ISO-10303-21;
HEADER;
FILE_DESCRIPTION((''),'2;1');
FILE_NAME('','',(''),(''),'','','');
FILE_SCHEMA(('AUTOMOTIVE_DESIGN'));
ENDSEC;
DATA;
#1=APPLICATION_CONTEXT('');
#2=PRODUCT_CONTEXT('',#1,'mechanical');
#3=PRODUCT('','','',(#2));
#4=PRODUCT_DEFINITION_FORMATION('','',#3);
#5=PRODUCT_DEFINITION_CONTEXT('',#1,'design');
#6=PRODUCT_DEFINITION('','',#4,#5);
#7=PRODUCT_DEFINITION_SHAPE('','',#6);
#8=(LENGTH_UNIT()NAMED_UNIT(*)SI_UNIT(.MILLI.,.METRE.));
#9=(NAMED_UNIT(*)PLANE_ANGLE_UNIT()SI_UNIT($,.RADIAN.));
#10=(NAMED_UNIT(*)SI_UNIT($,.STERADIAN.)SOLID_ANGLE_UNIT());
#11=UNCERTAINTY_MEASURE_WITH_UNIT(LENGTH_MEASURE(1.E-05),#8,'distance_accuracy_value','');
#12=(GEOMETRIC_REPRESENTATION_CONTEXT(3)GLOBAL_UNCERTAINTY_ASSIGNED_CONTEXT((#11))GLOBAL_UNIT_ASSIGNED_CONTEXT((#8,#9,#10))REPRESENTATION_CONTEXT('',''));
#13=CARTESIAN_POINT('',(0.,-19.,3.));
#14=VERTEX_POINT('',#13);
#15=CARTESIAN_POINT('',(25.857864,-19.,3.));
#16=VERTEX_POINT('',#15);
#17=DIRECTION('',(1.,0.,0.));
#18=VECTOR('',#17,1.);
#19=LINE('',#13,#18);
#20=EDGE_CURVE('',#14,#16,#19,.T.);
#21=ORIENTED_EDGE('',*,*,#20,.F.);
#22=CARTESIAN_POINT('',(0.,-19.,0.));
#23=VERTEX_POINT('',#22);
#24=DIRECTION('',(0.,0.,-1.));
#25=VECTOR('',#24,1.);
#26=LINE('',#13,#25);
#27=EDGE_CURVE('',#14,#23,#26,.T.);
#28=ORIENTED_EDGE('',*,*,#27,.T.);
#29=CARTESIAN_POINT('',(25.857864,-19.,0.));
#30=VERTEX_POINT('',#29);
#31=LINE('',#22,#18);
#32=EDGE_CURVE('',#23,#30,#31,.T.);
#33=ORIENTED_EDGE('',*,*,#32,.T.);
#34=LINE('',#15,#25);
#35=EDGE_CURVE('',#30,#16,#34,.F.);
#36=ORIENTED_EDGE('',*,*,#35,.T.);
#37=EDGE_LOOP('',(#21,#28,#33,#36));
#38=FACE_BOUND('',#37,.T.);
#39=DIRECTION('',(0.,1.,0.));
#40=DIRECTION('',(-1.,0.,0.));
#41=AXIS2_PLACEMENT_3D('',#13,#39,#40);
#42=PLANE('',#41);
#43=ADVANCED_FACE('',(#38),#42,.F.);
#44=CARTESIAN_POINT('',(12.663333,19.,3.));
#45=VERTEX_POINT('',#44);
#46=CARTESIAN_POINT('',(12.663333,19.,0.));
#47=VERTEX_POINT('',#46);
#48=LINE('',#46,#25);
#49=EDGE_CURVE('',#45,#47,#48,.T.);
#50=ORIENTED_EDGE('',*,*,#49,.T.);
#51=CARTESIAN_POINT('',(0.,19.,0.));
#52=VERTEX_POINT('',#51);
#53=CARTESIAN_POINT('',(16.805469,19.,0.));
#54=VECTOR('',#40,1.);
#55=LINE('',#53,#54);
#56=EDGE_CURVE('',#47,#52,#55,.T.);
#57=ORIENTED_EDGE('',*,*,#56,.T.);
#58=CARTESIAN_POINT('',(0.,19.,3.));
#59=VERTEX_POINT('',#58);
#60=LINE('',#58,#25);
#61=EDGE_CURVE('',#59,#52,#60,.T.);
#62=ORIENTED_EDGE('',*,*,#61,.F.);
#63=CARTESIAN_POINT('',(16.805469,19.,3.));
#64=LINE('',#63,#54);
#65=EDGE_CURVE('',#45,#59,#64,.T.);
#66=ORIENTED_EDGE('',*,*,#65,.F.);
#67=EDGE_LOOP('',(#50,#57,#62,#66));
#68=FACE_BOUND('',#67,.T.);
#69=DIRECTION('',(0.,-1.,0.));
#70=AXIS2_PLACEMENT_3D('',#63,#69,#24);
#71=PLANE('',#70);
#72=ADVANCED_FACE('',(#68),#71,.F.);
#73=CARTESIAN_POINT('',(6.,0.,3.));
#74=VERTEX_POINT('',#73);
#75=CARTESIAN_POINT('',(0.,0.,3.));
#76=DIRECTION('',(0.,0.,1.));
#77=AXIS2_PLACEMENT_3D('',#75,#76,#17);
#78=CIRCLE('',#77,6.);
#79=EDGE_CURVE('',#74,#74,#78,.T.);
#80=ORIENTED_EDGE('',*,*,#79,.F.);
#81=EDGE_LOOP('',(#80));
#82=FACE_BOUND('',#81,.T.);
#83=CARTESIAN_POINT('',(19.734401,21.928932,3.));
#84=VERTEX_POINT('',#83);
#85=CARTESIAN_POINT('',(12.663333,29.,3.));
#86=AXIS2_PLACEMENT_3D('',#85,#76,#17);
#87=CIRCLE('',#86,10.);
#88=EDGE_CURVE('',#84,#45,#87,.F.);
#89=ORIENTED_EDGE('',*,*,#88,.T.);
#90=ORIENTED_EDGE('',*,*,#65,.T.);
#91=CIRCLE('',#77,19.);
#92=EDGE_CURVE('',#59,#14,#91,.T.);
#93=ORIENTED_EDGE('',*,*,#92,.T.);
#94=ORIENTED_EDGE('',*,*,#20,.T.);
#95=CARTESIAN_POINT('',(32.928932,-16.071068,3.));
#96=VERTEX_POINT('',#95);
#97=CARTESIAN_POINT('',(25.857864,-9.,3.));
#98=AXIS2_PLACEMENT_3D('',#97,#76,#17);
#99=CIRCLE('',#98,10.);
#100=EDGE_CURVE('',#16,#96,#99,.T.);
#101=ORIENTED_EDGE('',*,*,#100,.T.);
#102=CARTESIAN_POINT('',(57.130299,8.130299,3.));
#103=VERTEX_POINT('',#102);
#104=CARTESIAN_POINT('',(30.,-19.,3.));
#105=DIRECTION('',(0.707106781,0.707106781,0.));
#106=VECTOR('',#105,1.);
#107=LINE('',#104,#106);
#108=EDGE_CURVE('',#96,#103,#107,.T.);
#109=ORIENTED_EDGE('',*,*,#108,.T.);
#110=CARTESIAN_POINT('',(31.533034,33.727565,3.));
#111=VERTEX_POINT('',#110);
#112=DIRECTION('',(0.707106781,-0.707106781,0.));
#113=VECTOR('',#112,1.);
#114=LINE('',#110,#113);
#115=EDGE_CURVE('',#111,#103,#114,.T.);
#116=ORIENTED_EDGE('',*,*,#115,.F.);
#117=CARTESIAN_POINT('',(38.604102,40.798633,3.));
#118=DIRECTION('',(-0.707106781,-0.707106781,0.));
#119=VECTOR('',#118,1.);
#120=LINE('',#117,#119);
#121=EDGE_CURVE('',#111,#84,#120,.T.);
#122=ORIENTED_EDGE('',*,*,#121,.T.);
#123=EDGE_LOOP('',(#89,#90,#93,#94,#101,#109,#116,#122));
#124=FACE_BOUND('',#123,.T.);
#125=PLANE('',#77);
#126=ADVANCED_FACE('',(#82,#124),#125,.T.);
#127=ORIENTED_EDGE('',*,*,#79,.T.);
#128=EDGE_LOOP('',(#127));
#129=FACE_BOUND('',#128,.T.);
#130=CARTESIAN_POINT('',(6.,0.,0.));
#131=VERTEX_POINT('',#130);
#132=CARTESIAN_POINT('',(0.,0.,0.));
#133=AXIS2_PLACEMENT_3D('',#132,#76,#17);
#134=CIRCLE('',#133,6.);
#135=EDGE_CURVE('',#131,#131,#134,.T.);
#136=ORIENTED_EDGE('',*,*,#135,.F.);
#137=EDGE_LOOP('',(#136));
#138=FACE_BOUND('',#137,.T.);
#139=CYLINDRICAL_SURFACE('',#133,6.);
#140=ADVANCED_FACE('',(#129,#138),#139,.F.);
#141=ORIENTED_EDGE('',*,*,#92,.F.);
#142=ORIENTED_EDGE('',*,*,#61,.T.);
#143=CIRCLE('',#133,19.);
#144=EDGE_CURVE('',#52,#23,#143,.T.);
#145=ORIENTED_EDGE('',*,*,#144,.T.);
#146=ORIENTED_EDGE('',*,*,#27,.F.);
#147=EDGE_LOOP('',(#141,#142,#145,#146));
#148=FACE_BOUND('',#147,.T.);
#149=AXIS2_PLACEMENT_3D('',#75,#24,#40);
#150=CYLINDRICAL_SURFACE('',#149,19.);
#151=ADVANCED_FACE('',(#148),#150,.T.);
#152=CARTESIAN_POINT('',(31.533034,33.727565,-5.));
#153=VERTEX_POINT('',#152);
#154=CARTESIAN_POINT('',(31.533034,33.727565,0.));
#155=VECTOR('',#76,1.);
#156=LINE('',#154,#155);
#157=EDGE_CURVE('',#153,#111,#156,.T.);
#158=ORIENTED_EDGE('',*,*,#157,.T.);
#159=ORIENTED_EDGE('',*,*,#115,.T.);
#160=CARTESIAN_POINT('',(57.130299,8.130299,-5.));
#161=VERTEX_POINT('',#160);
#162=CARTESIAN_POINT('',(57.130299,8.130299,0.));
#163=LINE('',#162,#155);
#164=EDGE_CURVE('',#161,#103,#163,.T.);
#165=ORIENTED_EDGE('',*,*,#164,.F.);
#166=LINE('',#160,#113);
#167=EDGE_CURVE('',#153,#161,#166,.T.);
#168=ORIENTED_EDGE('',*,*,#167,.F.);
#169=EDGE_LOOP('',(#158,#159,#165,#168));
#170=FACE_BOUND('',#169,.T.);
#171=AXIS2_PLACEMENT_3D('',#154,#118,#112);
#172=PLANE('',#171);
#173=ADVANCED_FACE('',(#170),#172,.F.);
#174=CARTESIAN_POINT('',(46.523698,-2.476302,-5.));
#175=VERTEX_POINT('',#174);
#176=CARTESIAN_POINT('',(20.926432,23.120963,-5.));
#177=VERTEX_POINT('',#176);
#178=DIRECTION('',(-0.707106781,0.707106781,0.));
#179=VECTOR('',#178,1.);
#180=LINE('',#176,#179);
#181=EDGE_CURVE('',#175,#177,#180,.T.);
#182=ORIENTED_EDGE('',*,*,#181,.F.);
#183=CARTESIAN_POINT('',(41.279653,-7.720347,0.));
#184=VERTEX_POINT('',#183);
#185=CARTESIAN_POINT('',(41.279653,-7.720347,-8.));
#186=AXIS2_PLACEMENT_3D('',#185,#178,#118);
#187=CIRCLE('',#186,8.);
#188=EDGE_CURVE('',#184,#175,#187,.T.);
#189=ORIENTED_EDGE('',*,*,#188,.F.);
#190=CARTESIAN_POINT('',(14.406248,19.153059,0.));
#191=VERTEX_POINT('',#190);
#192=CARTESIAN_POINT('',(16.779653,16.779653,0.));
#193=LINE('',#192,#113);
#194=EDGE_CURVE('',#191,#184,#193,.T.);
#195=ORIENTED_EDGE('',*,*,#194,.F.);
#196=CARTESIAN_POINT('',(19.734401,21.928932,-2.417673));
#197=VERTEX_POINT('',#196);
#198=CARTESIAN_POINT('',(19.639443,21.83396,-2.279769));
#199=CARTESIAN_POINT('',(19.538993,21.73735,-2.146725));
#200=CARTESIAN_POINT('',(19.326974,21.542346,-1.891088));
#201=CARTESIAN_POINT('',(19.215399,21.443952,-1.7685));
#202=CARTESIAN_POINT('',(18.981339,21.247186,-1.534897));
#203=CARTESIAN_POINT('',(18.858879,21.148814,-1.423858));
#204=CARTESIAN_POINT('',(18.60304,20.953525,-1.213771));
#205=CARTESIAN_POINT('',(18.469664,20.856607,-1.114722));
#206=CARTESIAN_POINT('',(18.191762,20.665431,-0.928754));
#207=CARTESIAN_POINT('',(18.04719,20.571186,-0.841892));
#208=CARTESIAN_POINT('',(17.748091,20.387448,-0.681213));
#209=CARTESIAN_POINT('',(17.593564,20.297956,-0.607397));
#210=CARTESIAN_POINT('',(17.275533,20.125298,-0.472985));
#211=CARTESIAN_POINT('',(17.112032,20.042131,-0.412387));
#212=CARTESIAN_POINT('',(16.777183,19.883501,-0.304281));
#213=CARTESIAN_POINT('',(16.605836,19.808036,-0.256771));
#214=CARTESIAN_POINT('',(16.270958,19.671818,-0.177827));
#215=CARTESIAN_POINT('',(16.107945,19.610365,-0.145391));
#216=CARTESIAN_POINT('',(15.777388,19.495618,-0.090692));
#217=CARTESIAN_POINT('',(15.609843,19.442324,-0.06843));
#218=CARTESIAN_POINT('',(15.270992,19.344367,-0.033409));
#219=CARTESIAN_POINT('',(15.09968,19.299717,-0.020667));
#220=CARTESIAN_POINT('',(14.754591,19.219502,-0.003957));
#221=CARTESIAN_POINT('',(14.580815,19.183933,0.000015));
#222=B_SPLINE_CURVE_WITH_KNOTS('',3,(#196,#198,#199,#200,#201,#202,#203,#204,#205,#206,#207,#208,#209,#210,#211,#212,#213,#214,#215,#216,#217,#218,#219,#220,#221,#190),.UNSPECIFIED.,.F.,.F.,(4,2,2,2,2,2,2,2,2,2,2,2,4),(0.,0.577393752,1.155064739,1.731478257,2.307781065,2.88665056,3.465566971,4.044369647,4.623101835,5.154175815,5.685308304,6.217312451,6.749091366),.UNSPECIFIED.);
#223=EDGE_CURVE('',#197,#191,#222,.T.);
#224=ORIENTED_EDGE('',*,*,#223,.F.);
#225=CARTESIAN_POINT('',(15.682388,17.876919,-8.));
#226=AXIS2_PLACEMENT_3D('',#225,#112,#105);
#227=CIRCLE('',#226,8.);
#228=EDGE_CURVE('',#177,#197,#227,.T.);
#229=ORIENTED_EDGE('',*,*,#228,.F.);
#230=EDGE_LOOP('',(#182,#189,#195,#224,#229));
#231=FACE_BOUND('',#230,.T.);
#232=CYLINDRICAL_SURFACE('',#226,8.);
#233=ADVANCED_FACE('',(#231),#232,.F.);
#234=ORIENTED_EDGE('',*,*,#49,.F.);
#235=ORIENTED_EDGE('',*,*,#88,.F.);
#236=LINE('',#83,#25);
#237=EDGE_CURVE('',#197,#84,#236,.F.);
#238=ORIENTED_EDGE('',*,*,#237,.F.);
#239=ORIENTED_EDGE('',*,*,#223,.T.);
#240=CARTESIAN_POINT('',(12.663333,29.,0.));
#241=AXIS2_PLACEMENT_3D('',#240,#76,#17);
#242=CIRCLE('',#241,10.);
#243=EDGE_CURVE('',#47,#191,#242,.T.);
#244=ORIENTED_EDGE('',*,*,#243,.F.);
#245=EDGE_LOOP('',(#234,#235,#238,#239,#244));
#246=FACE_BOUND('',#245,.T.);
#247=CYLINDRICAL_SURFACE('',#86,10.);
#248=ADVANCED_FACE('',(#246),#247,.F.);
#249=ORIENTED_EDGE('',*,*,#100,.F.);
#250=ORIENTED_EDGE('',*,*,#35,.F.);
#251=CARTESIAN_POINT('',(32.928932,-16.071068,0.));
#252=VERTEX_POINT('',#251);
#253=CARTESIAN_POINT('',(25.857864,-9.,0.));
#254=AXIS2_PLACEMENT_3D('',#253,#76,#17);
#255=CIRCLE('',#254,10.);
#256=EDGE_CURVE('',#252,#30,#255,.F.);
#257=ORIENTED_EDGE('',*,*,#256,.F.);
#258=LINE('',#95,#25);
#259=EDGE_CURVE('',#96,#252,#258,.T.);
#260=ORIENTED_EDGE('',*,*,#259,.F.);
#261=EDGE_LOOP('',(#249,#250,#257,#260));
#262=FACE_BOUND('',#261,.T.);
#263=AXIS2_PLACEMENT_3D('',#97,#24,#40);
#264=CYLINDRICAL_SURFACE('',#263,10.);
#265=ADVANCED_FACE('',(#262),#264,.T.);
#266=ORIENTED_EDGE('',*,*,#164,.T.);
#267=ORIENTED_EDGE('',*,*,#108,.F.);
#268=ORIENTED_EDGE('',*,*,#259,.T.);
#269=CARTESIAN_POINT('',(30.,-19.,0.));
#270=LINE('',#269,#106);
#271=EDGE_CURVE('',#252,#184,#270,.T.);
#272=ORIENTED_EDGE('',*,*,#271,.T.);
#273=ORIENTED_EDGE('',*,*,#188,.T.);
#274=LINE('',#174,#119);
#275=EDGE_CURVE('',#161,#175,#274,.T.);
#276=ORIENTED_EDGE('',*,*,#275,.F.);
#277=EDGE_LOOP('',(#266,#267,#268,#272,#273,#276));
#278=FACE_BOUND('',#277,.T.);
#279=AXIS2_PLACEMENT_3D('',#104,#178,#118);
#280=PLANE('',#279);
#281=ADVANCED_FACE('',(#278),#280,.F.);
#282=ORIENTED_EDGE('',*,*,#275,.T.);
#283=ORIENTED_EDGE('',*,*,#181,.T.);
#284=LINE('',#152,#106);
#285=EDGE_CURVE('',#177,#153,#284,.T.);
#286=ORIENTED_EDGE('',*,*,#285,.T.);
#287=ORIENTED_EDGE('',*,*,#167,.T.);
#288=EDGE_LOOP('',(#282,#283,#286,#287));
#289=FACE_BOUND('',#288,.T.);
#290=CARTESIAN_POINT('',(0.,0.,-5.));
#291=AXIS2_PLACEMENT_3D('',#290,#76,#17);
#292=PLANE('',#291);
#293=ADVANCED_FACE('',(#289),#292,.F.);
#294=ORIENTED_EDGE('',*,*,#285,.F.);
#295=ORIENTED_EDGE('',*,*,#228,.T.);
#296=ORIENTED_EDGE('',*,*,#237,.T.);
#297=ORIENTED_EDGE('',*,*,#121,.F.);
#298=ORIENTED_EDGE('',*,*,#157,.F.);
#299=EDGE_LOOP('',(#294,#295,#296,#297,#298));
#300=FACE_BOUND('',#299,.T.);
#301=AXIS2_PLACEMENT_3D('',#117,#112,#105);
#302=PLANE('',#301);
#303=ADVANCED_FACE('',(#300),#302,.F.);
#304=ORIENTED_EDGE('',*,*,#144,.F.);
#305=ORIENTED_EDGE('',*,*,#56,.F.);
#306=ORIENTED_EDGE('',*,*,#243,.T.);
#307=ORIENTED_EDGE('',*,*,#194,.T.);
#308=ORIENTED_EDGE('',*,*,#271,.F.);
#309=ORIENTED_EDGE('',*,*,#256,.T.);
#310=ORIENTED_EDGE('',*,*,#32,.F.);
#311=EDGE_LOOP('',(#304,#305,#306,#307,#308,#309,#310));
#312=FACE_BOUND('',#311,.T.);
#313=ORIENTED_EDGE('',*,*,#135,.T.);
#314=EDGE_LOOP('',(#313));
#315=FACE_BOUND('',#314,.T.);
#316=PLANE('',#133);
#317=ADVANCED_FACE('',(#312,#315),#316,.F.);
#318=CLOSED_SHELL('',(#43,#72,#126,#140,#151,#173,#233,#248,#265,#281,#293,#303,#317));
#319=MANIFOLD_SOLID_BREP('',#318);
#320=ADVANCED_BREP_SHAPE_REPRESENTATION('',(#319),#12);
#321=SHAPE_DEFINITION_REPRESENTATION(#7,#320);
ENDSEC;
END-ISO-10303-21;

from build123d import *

# Parameters (mm, degrees)
SKETCH1_R           = 2.5
BOSS_EXTRUDE1_DEPTH = 3
SKETCH2_R           = 1.5
CUT_EXTRUDE1_DEPTH  = 77.127156728
FILLET1_R           = 10
SKETCH3_R           = 6
CUT_EXTRUDE2_DEPTH  = 77.127156728
BOSS_EXTRUDE3_DEPTH = 5
FILLET3_START       = -3.356502253
FILLET3_DEPTH       = 38.004734531
FILLET3_START_2     = -6
FILLET3_2_DEPTH     = 6


with BuildPart() as part:
    # Sketch1 → Boss-Extrude1 (new body)
    with BuildSketch(Plane.XY):
        with BuildLine():
            Line((0, -19), (30, -19))
            Line((30, -19), (64.201367261, 15.201367261))
            Line((64.201367261, 15.201367261), (58.615223689, 20.787510832))
            Line((58.615223689, 20.787510832), (44.190245353, 35.212489168))
            Line((44.190245353, 35.212489168), (38.604101782, 40.798632739))
            Line((38.604101782, 40.798632739), (16.805469042, 19))
            Line((16.805469042, 19), (0, 19))
            ThreePointArc((0, 19), (-19, 0), (0, -19))
        make_face()
        Circle(SKETCH1_R, mode=Mode.SUBTRACT)
    extrude(amount=BOSS_EXTRUDE1_DEPTH)

    # Sketch2 → Cut-Extrude1 (cut, through all)
    with BuildSketch(Plane.XY.offset(3)):
        with Locations((38.878105659, 35.574881393)):
            Circle(SKETCH2_R)
        with Locations((58.977615915, 15.475371138)):
            Circle(SKETCH2_R)
    extrude(amount=-CUT_EXTRUDE1_DEPTH, mode=Mode.SUBTRACT)

    # Fillet1
    fillet1_edges = [part.edges().sort_by_distance(p)[0] for p in [
        (16.805469042, 19, 1.5),
        (30, -19, 1.5),
    ]]
    fillet(fillet1_edges, radius=FILLET1_R)

    # Sketch3 → Cut-Extrude2 (cut, through all)
    with BuildSketch(Plane.XY.offset(3)):
        Circle(SKETCH3_R)
        Polygon((38.604101782, 40.798632739), (31.53303397, 33.727564928), (57.130299449, 8.130299449), (64.201367261, 15.201367261), align=None)
    extrude(amount=-CUT_EXTRUDE2_DEPTH, mode=Mode.SUBTRACT)

    # Sketch5 → Boss-Extrude3 (add)
    with BuildSketch(Plane(origin=(0, 0, 0), x_dir=(-1, 0, 0), z_dir=(0, 0, -1))):
        Polygon((-57.130299449, 8.130299449), (-31.53303397, 33.727564928), (-20.926432252, 23.12096321), (-46.523697731, -2.476302269), align=None)
    extrude(amount=BOSS_EXTRUDE3_DEPTH)

    # Fillet3: read off the stored shape, not the designer's step
    # Fillet3 outline → Fillet3 (add)
    with BuildSketch(Plane(origin=(0, 0, 0), x_dir=(0.707106781186548, 0.707106781186547, 0), z_dir=(0.707106781186547, -0.707106781186548, 0)).offset(FILLET3_START)):
        with BuildLine():
            ThreePointArc((23.730013537, 0), (28.202149492, -1.366750419), (31.146212025, -5))
            Line((31.146212025, -5), (31.146212025, 0))
            Line((31.146212025, 0), (23.730013537, 0))
        make_face()
    extrude(amount=FILLET3_DEPTH)

    # Fillet3 2 outline → Fillet3 2 (cut)
    with BuildSketch(Plane.XY.offset(FILLET3_START_2)):
        with BuildLine():
            Line((19.650292227, 24.397103235), (14.406247999, 19.153058913))
            ThreePointArc((14.406247999, 19.153058913), (17.283716467, 20.131400309), (19.73440123, 21.928932188))
            Line((19.73440123, 21.928932188), (20.926432252, 23.12096321))
            Line((20.926432252, 23.12096321), (19.650292227, 24.397103235))
        make_face()
    extrude(amount=FILLET3_2_DEPTH, mode=Mode.SUBTRACT)


solid = part.part
